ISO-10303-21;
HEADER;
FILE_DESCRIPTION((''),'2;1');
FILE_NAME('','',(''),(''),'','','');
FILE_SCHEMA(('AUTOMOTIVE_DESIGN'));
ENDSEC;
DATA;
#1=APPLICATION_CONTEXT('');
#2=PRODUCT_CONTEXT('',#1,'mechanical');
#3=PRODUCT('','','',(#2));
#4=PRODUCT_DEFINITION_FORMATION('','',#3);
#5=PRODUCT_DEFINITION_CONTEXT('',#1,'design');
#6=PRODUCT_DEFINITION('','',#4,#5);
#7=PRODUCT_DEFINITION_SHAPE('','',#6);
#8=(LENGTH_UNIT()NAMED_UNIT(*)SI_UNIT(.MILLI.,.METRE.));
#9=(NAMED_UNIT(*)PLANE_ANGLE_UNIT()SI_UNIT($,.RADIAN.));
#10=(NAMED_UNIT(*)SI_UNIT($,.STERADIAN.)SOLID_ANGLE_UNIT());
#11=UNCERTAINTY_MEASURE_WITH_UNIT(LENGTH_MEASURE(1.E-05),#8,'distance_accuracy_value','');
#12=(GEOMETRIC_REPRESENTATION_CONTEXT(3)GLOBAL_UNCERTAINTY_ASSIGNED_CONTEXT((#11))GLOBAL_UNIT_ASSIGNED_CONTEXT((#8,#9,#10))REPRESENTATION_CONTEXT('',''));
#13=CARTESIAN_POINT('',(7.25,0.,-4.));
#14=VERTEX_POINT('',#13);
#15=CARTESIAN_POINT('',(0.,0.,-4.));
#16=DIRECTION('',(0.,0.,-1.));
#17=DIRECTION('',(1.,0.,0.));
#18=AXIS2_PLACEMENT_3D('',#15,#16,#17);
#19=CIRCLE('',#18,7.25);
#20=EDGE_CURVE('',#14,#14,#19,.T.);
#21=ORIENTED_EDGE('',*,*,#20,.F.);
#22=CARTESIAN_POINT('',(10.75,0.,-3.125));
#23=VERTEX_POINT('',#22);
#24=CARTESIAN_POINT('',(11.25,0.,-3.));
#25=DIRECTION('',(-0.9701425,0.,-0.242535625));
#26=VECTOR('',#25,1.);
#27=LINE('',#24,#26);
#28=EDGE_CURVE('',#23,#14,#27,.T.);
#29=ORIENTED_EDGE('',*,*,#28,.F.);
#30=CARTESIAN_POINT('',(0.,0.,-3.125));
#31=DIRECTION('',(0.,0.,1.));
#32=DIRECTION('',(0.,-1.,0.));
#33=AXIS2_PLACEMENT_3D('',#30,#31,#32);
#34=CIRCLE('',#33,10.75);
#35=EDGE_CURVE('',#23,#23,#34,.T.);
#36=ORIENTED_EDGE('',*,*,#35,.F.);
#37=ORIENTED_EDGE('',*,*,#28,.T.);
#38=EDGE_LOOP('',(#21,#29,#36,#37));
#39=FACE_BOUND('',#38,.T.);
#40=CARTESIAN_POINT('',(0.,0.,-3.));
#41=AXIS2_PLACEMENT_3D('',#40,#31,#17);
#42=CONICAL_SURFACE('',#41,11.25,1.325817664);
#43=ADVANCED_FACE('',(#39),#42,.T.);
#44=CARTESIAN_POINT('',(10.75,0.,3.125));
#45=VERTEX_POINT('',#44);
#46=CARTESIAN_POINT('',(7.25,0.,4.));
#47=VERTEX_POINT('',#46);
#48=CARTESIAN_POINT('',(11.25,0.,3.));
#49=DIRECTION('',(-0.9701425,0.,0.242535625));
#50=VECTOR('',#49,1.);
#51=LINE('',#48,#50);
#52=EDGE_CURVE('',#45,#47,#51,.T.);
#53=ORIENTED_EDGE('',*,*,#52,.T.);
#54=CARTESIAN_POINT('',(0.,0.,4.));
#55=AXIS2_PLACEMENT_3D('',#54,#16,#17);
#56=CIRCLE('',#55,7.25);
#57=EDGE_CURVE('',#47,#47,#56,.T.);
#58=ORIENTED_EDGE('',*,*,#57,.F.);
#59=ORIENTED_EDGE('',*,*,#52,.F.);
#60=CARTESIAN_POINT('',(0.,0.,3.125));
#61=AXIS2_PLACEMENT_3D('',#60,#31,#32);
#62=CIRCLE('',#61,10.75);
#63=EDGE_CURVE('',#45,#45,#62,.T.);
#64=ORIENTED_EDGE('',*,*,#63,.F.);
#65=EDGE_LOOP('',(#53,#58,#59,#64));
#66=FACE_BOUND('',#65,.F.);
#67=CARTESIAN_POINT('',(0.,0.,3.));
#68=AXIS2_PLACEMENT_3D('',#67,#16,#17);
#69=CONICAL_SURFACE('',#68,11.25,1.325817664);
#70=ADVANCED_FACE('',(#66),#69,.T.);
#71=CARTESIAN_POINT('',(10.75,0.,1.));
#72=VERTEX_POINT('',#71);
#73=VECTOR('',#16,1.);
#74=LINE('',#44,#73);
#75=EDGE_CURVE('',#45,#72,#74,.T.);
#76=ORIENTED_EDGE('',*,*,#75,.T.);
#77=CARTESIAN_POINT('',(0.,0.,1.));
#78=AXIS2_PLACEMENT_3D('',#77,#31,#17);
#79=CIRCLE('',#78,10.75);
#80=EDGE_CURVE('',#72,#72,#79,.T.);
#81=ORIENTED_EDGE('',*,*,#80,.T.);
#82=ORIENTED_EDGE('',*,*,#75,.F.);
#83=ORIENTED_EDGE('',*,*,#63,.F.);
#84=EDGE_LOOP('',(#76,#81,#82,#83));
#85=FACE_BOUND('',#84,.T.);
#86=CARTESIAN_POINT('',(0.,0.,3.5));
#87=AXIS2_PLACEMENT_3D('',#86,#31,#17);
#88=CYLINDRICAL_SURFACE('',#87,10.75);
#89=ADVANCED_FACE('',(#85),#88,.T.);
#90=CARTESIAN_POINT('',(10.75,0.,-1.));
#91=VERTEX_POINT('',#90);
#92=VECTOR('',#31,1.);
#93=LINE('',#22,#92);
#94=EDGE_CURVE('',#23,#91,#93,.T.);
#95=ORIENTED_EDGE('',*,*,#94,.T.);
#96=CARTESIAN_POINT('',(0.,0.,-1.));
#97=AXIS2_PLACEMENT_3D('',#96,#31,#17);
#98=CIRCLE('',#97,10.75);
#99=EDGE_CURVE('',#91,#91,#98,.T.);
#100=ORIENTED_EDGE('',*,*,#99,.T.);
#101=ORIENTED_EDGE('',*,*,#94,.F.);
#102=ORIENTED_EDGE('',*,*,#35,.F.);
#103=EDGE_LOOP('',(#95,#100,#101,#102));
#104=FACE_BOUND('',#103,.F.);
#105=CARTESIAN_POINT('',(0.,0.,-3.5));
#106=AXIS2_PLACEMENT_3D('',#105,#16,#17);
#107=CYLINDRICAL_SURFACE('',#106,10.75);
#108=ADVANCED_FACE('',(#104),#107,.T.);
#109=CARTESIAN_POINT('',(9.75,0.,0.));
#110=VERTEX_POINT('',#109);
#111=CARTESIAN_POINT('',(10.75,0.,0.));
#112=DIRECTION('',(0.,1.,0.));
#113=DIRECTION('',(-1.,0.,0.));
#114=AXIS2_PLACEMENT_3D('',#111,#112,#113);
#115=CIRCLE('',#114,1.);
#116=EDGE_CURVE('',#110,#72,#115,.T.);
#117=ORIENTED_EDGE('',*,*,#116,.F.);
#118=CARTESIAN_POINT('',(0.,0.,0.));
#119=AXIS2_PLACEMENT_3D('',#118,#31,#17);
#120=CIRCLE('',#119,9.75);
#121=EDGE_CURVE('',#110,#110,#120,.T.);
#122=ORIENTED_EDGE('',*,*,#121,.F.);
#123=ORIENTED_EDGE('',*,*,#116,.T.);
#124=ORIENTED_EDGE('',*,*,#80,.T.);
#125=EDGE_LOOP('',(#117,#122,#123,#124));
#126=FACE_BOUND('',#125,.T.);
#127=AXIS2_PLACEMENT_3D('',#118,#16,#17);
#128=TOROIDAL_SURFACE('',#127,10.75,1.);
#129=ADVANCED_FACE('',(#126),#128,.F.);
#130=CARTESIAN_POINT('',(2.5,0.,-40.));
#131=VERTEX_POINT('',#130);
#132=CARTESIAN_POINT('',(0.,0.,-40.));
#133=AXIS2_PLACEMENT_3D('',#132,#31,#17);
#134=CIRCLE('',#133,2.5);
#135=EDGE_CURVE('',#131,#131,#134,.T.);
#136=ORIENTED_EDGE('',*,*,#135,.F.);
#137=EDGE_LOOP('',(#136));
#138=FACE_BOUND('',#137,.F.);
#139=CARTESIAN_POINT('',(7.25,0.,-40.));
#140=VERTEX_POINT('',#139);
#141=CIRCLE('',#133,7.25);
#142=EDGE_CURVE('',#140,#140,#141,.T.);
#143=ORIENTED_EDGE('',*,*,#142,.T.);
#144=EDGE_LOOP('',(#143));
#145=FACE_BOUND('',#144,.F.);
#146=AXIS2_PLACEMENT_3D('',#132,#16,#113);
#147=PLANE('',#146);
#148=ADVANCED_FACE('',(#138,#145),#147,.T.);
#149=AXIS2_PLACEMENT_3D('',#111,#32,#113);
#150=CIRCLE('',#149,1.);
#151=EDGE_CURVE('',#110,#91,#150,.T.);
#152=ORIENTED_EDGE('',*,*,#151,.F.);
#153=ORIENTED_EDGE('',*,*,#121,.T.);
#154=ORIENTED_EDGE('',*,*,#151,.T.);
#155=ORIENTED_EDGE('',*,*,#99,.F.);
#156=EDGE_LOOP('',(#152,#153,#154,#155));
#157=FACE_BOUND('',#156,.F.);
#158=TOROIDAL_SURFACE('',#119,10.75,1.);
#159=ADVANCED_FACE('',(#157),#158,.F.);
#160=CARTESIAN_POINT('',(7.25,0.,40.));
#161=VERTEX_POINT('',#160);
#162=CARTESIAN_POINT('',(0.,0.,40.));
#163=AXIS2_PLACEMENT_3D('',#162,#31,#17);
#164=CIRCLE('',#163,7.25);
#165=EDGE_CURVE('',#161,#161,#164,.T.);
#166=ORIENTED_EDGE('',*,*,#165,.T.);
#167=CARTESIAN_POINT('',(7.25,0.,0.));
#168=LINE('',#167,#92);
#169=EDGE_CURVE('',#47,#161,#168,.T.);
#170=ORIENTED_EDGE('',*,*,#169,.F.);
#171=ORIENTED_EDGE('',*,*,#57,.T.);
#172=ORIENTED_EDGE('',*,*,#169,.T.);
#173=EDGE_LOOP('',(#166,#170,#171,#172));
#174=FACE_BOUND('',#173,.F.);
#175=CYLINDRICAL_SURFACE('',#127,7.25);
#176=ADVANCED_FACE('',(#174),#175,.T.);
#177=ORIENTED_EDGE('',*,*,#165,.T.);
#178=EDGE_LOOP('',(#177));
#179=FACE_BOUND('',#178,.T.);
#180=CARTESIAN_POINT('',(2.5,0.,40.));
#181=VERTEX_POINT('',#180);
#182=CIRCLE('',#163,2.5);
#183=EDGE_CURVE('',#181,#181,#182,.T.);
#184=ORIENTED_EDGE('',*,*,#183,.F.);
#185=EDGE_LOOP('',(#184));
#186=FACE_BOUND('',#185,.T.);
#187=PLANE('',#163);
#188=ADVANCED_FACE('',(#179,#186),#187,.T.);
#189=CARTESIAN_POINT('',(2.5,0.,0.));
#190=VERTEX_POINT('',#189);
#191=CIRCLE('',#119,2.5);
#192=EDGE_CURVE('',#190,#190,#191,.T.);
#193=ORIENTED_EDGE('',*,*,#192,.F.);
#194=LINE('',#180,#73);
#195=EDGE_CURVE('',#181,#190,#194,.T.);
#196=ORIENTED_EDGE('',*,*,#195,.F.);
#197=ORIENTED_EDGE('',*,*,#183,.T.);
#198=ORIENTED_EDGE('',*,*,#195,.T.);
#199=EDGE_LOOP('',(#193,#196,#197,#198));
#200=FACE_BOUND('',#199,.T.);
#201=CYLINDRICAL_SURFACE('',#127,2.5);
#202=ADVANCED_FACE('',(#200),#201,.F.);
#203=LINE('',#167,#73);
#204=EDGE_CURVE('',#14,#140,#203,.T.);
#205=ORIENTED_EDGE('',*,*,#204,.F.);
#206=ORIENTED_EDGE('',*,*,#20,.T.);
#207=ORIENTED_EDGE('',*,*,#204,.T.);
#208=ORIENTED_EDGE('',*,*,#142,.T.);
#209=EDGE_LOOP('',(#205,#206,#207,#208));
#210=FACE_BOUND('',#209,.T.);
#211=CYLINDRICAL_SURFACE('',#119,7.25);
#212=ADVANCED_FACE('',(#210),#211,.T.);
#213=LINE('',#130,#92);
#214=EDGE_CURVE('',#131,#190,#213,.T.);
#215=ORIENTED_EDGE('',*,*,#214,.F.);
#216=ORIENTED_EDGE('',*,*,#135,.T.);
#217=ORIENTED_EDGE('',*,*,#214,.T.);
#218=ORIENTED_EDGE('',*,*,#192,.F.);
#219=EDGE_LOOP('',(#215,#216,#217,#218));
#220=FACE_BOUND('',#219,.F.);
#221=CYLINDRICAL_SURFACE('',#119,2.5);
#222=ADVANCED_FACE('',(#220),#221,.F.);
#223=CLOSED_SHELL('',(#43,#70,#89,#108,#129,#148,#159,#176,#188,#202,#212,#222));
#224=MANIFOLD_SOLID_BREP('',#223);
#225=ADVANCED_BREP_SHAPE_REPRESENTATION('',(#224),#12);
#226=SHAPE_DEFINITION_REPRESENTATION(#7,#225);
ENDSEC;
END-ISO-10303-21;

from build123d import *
from build123d import SkipClean  # not in build123d's __all__

# Parameters (mm, degrees)
F0_R        = 7.25
F0_R_2      = 2.5
F1_DEPTH    = 40
F4_S5_R     = 10.75
F4_T6_DEPTH = 17


# Not quite as in the source:
# - a fillet or chamfer that OpenCascade refuses, or shapes differently, is made with other operations: its cross-section is extruded or revolved along the edge and cut away or added


with BuildPart() as f1:
    # F0 (on Top) → F1 (new body)
    with BuildSketch(Plane.XY):
        Circle(F0_R)
        Circle(F0_R_2, mode=Mode.SUBTRACT)
    extrude(amount=F1_DEPTH)

    # F2 (on Front) → F3 (revolve)
    with BuildSketch(Plane.XZ):
        with BuildLine():
            Line((10.75, 3), (2.5, 3))
            Line((2.5, 3), (2.5, 0))
            Line((2.5, 0), (9.75, 0))
            ThreePointArc((9.75, 0), (10.0428932188, 0.7071067812), (10.75, 1))
            Line((10.75, 1), (10.75, 3))
        make_face()
    revolve(axis=Axis((0, 0, 1.5), (0, 0, 1)))

    # F4: chamfer of 4 x 1 on 1 edges, made by hand


with BuildPart() as f4_tool2:
    # F4_s3 → F4_t4 (revolve)
    with BuildSketch(Plane.XZ):
        Polygon((11.25, 3), (7.25, 4), (7.25, 3), align=None)
    revolve(axis=Axis((0, 0, 3), (0, 0, -1)))

    # F4_s5 → F4_t6 (intersect, symmetric)
    with BuildSketch(Plane.XY.offset(3.5)):
        Circle(F4_S5_R)
    extrude(amount=F4_T6_DEPTH, both=True, mode=Mode.INTERSECT)


with BuildPart() as f1_1:
    add(f1.part, clean=False)

    # F4_t1: union F4_tool2
    add(f4_tool2.part)

    # F5: F1 across face


with BuildPart() as f1_2:
    add(f1_1.part, clean=False)
    with SkipClean():  # cleaning this boolean's faces spoils the solid; the shape is the same uncleaned
        add(f1_1.part.mirror(Plane(origin=(0, 0, 0), x_dir=(1, 0, 0), z_dir=(0, 0, -1))), clean=False)


solid = f1_2.part
